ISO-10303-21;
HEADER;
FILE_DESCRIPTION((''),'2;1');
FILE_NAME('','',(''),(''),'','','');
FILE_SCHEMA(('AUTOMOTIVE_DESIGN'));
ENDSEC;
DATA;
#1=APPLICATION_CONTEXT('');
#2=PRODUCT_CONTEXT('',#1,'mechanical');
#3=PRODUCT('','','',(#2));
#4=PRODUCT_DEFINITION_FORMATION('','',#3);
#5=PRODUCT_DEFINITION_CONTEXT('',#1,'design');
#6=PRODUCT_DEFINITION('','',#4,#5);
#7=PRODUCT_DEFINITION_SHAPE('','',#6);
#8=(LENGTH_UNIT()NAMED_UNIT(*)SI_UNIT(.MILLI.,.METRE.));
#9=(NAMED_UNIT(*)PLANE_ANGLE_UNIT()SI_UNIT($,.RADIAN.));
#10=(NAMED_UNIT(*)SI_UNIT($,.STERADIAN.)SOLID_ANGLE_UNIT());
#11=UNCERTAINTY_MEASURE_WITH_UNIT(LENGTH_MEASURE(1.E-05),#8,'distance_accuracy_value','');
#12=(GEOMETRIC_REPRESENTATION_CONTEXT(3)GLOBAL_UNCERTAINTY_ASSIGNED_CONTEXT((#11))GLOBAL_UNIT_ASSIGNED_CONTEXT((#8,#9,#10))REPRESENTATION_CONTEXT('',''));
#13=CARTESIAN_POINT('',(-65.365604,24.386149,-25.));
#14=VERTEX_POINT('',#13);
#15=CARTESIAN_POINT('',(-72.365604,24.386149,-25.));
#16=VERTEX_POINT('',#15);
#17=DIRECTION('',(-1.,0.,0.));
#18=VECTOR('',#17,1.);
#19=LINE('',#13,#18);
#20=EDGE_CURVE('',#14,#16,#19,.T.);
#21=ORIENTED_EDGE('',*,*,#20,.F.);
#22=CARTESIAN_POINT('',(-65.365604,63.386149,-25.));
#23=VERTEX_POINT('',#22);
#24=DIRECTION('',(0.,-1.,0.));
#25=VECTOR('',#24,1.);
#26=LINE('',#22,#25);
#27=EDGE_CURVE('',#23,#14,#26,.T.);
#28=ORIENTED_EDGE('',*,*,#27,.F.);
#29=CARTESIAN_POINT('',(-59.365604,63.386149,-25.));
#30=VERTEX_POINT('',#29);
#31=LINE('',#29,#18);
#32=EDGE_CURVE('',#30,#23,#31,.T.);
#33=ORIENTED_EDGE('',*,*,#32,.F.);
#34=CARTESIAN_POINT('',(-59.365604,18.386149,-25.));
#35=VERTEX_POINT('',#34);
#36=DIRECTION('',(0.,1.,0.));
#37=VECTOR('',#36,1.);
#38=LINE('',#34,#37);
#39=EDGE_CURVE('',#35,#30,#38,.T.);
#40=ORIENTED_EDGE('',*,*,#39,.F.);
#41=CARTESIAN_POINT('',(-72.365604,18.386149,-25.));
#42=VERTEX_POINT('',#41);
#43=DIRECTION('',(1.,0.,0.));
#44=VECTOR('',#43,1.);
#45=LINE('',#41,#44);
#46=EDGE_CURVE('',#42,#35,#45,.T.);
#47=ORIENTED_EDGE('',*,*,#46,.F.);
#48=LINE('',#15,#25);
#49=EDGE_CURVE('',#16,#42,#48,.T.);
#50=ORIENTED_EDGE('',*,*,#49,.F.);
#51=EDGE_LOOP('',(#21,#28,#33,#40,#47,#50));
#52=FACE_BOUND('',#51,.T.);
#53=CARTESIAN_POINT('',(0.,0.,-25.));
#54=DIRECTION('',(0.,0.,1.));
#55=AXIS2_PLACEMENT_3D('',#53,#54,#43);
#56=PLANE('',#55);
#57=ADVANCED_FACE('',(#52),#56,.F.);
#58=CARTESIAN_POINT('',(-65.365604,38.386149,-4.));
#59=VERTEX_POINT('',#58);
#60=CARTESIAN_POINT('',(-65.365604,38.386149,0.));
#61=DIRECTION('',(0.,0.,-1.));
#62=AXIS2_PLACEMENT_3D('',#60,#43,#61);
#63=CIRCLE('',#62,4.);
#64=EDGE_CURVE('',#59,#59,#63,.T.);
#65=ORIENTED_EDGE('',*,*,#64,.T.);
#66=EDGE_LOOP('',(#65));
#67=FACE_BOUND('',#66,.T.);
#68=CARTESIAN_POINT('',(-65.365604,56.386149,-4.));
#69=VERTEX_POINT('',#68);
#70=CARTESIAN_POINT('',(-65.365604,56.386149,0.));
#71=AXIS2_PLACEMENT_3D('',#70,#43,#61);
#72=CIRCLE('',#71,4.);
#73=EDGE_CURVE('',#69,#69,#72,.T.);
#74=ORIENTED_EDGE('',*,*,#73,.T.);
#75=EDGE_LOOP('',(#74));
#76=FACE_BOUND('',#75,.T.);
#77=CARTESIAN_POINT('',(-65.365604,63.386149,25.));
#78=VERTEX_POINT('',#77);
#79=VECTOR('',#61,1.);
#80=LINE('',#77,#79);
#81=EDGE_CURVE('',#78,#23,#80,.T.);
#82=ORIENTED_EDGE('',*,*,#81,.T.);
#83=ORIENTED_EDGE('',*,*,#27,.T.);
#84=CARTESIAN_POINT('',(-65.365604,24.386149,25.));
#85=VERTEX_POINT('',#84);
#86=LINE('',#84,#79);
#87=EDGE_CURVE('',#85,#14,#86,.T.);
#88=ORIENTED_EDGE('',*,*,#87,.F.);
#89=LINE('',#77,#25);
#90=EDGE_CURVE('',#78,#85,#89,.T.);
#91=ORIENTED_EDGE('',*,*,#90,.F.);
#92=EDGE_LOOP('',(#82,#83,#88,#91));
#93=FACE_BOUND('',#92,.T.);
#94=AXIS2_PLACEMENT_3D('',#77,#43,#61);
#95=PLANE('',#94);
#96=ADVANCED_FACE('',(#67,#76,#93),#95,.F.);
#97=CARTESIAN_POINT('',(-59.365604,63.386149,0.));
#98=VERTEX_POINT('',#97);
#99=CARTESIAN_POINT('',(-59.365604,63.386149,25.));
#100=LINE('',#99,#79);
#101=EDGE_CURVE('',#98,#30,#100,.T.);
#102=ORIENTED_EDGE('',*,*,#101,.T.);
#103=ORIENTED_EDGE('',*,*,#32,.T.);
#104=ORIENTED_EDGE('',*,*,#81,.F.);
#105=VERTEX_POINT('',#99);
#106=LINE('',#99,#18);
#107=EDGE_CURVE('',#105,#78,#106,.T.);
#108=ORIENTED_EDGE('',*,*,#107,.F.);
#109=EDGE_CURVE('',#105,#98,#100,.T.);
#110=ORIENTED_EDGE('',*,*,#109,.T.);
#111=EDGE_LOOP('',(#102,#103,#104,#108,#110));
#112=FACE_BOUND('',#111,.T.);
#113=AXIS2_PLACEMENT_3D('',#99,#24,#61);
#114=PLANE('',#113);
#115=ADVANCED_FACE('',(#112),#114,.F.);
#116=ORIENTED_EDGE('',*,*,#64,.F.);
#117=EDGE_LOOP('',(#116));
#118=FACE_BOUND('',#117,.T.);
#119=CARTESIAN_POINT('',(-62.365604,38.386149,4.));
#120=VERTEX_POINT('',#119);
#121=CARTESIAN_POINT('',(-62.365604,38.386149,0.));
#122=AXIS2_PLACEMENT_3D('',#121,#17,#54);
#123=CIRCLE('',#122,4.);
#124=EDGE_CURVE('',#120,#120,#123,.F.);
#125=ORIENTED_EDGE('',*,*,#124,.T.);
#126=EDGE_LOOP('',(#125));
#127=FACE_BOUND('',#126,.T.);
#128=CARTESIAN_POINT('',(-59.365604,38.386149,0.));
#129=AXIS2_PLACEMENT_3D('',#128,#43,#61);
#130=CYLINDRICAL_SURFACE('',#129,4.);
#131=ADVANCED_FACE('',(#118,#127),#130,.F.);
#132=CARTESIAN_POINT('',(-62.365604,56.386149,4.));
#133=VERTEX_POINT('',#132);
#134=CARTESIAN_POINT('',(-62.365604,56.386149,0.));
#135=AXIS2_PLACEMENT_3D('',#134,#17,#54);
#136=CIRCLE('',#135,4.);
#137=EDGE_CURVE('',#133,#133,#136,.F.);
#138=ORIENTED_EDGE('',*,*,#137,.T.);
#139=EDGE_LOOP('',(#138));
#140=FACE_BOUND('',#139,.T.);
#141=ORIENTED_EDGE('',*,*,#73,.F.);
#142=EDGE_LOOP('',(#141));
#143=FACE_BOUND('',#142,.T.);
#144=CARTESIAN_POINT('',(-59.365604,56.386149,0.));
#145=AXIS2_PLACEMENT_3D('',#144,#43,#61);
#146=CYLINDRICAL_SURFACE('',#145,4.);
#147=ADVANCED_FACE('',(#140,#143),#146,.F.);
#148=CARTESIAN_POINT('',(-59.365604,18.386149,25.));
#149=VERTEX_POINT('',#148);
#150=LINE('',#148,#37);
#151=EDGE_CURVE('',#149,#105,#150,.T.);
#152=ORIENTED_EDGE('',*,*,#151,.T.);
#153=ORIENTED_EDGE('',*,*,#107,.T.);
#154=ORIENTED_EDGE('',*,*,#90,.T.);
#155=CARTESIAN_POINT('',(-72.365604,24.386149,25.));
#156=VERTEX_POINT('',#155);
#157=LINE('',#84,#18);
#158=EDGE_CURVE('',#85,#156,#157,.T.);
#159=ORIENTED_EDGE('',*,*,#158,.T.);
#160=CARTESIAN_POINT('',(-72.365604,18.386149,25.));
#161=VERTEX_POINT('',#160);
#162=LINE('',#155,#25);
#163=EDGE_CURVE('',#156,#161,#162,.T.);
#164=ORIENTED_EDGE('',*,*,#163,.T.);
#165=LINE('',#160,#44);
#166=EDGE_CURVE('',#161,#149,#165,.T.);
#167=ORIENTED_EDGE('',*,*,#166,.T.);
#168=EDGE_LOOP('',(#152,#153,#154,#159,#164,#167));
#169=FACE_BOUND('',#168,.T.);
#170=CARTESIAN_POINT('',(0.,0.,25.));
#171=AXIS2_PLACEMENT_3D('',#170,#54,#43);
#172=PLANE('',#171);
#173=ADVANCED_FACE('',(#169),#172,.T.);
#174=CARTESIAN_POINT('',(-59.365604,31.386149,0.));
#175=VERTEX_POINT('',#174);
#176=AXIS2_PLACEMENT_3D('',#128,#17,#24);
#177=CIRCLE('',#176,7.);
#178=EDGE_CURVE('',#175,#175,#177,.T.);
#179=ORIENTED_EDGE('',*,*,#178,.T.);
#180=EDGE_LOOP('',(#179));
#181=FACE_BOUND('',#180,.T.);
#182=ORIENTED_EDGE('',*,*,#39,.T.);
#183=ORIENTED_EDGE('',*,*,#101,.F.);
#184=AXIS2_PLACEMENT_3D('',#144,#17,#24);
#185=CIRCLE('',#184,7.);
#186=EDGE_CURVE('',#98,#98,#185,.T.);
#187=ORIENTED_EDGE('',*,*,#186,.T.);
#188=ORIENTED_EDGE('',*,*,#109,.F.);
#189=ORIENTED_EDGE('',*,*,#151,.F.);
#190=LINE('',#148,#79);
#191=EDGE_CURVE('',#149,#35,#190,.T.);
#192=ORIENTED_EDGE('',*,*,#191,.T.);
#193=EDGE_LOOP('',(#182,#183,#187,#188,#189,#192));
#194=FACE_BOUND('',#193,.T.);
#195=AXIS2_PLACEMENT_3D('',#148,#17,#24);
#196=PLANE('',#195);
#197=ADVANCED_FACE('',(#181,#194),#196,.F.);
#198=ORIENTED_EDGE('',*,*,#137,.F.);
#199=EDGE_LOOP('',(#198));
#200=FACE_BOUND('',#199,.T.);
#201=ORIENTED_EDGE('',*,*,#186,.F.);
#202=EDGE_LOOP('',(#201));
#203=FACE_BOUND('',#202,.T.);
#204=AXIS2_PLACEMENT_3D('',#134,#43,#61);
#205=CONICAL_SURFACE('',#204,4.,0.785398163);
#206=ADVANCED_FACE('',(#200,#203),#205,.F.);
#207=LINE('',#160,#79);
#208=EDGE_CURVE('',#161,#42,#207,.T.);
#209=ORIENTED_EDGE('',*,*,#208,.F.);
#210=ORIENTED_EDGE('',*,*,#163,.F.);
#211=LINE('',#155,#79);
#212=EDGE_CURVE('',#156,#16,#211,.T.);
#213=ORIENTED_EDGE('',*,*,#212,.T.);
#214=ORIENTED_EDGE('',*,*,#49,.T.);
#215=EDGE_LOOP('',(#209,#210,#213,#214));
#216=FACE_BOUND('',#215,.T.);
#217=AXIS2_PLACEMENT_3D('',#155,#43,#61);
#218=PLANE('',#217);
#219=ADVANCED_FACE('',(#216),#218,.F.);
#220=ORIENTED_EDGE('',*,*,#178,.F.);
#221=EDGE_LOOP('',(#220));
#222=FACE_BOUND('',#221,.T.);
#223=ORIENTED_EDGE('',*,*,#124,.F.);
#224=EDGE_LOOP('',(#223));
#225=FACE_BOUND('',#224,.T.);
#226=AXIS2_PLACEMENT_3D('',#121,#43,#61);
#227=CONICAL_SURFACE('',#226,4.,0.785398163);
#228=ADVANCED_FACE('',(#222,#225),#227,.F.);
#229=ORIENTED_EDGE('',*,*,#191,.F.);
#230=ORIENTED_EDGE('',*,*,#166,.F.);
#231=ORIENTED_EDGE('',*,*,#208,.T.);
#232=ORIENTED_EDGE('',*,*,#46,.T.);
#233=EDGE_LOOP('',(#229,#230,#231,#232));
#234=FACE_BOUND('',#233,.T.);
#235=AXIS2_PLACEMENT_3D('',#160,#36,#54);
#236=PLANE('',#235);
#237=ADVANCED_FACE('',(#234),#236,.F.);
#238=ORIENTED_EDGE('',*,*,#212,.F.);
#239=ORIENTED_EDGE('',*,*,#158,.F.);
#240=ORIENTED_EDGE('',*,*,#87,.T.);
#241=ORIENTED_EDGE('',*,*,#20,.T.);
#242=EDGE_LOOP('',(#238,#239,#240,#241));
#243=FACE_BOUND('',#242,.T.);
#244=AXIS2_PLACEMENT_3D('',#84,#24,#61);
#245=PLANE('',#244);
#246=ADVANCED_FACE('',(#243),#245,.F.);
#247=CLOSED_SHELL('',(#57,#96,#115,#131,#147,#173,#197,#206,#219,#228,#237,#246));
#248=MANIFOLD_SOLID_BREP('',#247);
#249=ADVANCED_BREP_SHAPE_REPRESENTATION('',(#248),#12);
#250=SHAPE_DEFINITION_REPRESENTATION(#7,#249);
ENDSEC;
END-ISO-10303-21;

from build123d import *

# Parameters (mm, degrees)
BOSS_EXTRUDE1_DEPTH   = 25
F_1_0MM_DOWEL_HOLE1_D = 8
CHAMFER1_SIZE         = 3


with BuildPart() as part:
    # Sketch1 → Boss-Extrude1 (new, symmetric)
    with BuildSketch(Plane.XY):
        Polygon((-59.365603585, 18.386149477), (-59.365603585, 63.386149477), (-65.365603585, 63.386149477), (-65.365603585, 24.386149477), (-72.365603585, 24.386149477), (-72.365603585, 18.386149477), align=None)
    extrude(amount=BOSS_EXTRUDE1_DEPTH, both=True)

    # Ø1.0mm Dowel Hole1 (through all)
    with Locations(Plane(origin=(-59.365603585, 0, 0), x_dir=(0, 0, -1), z_dir=(1, 0, 0))):
        with Locations((0, 56.386149477), (0, 38.386149477)):
            Hole(F_1_0MM_DOWEL_HOLE1_D / 2)

    # Chamfer1
    chamfer1_edges = [part.edges().sort_by_distance(p)[0] for p in [
        (-59.365603585, 38.386149477, -4),
        (-59.365603585, 56.386149477, -4),
    ]]
    chamfer(chamfer1_edges, length=CHAMFER1_SIZE - 0.0001)  # a hair under: the kernel refuses the full size


solid = part.part
